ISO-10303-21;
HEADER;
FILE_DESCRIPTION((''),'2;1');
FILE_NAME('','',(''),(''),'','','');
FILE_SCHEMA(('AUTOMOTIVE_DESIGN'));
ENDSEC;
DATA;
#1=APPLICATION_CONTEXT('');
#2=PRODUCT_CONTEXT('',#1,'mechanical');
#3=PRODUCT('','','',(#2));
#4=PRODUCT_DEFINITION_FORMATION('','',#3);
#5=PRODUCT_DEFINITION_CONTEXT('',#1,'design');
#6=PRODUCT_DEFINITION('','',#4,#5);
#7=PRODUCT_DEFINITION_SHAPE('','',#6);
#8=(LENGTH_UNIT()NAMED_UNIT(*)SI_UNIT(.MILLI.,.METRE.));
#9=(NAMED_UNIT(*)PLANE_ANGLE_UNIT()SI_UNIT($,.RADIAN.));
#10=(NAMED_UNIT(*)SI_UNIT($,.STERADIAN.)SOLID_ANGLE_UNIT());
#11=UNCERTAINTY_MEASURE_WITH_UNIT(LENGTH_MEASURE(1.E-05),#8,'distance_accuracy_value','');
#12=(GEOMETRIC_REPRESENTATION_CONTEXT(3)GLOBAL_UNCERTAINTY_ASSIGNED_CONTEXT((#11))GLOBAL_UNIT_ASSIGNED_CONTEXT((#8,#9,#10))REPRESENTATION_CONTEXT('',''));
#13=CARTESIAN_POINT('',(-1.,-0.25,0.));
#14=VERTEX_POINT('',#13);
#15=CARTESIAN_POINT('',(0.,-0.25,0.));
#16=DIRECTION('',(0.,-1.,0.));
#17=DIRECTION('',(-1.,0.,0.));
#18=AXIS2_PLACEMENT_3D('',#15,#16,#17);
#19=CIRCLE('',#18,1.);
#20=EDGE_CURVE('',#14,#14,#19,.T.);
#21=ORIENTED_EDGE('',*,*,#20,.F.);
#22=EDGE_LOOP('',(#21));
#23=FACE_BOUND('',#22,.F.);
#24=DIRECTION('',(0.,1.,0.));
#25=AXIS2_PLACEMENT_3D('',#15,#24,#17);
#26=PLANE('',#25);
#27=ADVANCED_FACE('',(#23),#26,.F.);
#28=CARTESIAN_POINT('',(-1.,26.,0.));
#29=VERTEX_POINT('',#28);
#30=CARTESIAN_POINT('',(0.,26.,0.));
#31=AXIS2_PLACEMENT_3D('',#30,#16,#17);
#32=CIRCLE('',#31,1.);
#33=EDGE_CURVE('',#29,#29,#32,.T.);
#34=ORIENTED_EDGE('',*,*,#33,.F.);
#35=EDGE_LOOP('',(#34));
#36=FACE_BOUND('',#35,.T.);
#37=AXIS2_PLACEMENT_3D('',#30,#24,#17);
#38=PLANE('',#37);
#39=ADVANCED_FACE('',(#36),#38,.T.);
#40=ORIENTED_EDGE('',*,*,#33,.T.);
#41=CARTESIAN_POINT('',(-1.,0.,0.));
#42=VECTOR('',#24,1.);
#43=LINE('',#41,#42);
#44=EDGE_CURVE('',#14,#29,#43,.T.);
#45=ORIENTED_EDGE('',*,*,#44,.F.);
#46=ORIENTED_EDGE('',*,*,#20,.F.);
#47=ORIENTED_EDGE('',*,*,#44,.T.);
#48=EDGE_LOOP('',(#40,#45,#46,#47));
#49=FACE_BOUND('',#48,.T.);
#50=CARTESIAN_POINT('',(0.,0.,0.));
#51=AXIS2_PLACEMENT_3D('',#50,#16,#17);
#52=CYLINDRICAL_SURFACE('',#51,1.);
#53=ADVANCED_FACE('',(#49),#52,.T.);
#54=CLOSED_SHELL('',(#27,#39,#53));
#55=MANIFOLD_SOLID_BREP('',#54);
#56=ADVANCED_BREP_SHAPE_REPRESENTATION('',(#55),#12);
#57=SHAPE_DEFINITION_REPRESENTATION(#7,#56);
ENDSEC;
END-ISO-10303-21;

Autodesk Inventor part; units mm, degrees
ref_plane "YZ Plane" through (0, 0, 0) normal (1, 0, 0) x (0, 1, 0)
ref_plane "XZ Plane" through (0, 0, 0) normal (0, 1, 0) x (-1, 0, 0)
ref_plane "XY Plane" through (0, 0, 0) normal (0, 0, 1) x (1, 0, 0)
sketch "Sketch1" plane through (0, 0, 0) normal (0, 1, 0) x (-1, 0, 0)
  circle A0 centre (0, 0) radius 1
  dimension "d0" = 2
extrude "Extrusion1" add sketch "Sketch1" along normal blind 26
ref_plane "Work Plane1" through (0, -30, 0) normal (0, -1, 0) x (1, 0, 0)
move faces "Move1" translate (0, -0.25, 0) faces at (-0.5848, 0, -0.397)
properties part number "LOOP1_COLL"
